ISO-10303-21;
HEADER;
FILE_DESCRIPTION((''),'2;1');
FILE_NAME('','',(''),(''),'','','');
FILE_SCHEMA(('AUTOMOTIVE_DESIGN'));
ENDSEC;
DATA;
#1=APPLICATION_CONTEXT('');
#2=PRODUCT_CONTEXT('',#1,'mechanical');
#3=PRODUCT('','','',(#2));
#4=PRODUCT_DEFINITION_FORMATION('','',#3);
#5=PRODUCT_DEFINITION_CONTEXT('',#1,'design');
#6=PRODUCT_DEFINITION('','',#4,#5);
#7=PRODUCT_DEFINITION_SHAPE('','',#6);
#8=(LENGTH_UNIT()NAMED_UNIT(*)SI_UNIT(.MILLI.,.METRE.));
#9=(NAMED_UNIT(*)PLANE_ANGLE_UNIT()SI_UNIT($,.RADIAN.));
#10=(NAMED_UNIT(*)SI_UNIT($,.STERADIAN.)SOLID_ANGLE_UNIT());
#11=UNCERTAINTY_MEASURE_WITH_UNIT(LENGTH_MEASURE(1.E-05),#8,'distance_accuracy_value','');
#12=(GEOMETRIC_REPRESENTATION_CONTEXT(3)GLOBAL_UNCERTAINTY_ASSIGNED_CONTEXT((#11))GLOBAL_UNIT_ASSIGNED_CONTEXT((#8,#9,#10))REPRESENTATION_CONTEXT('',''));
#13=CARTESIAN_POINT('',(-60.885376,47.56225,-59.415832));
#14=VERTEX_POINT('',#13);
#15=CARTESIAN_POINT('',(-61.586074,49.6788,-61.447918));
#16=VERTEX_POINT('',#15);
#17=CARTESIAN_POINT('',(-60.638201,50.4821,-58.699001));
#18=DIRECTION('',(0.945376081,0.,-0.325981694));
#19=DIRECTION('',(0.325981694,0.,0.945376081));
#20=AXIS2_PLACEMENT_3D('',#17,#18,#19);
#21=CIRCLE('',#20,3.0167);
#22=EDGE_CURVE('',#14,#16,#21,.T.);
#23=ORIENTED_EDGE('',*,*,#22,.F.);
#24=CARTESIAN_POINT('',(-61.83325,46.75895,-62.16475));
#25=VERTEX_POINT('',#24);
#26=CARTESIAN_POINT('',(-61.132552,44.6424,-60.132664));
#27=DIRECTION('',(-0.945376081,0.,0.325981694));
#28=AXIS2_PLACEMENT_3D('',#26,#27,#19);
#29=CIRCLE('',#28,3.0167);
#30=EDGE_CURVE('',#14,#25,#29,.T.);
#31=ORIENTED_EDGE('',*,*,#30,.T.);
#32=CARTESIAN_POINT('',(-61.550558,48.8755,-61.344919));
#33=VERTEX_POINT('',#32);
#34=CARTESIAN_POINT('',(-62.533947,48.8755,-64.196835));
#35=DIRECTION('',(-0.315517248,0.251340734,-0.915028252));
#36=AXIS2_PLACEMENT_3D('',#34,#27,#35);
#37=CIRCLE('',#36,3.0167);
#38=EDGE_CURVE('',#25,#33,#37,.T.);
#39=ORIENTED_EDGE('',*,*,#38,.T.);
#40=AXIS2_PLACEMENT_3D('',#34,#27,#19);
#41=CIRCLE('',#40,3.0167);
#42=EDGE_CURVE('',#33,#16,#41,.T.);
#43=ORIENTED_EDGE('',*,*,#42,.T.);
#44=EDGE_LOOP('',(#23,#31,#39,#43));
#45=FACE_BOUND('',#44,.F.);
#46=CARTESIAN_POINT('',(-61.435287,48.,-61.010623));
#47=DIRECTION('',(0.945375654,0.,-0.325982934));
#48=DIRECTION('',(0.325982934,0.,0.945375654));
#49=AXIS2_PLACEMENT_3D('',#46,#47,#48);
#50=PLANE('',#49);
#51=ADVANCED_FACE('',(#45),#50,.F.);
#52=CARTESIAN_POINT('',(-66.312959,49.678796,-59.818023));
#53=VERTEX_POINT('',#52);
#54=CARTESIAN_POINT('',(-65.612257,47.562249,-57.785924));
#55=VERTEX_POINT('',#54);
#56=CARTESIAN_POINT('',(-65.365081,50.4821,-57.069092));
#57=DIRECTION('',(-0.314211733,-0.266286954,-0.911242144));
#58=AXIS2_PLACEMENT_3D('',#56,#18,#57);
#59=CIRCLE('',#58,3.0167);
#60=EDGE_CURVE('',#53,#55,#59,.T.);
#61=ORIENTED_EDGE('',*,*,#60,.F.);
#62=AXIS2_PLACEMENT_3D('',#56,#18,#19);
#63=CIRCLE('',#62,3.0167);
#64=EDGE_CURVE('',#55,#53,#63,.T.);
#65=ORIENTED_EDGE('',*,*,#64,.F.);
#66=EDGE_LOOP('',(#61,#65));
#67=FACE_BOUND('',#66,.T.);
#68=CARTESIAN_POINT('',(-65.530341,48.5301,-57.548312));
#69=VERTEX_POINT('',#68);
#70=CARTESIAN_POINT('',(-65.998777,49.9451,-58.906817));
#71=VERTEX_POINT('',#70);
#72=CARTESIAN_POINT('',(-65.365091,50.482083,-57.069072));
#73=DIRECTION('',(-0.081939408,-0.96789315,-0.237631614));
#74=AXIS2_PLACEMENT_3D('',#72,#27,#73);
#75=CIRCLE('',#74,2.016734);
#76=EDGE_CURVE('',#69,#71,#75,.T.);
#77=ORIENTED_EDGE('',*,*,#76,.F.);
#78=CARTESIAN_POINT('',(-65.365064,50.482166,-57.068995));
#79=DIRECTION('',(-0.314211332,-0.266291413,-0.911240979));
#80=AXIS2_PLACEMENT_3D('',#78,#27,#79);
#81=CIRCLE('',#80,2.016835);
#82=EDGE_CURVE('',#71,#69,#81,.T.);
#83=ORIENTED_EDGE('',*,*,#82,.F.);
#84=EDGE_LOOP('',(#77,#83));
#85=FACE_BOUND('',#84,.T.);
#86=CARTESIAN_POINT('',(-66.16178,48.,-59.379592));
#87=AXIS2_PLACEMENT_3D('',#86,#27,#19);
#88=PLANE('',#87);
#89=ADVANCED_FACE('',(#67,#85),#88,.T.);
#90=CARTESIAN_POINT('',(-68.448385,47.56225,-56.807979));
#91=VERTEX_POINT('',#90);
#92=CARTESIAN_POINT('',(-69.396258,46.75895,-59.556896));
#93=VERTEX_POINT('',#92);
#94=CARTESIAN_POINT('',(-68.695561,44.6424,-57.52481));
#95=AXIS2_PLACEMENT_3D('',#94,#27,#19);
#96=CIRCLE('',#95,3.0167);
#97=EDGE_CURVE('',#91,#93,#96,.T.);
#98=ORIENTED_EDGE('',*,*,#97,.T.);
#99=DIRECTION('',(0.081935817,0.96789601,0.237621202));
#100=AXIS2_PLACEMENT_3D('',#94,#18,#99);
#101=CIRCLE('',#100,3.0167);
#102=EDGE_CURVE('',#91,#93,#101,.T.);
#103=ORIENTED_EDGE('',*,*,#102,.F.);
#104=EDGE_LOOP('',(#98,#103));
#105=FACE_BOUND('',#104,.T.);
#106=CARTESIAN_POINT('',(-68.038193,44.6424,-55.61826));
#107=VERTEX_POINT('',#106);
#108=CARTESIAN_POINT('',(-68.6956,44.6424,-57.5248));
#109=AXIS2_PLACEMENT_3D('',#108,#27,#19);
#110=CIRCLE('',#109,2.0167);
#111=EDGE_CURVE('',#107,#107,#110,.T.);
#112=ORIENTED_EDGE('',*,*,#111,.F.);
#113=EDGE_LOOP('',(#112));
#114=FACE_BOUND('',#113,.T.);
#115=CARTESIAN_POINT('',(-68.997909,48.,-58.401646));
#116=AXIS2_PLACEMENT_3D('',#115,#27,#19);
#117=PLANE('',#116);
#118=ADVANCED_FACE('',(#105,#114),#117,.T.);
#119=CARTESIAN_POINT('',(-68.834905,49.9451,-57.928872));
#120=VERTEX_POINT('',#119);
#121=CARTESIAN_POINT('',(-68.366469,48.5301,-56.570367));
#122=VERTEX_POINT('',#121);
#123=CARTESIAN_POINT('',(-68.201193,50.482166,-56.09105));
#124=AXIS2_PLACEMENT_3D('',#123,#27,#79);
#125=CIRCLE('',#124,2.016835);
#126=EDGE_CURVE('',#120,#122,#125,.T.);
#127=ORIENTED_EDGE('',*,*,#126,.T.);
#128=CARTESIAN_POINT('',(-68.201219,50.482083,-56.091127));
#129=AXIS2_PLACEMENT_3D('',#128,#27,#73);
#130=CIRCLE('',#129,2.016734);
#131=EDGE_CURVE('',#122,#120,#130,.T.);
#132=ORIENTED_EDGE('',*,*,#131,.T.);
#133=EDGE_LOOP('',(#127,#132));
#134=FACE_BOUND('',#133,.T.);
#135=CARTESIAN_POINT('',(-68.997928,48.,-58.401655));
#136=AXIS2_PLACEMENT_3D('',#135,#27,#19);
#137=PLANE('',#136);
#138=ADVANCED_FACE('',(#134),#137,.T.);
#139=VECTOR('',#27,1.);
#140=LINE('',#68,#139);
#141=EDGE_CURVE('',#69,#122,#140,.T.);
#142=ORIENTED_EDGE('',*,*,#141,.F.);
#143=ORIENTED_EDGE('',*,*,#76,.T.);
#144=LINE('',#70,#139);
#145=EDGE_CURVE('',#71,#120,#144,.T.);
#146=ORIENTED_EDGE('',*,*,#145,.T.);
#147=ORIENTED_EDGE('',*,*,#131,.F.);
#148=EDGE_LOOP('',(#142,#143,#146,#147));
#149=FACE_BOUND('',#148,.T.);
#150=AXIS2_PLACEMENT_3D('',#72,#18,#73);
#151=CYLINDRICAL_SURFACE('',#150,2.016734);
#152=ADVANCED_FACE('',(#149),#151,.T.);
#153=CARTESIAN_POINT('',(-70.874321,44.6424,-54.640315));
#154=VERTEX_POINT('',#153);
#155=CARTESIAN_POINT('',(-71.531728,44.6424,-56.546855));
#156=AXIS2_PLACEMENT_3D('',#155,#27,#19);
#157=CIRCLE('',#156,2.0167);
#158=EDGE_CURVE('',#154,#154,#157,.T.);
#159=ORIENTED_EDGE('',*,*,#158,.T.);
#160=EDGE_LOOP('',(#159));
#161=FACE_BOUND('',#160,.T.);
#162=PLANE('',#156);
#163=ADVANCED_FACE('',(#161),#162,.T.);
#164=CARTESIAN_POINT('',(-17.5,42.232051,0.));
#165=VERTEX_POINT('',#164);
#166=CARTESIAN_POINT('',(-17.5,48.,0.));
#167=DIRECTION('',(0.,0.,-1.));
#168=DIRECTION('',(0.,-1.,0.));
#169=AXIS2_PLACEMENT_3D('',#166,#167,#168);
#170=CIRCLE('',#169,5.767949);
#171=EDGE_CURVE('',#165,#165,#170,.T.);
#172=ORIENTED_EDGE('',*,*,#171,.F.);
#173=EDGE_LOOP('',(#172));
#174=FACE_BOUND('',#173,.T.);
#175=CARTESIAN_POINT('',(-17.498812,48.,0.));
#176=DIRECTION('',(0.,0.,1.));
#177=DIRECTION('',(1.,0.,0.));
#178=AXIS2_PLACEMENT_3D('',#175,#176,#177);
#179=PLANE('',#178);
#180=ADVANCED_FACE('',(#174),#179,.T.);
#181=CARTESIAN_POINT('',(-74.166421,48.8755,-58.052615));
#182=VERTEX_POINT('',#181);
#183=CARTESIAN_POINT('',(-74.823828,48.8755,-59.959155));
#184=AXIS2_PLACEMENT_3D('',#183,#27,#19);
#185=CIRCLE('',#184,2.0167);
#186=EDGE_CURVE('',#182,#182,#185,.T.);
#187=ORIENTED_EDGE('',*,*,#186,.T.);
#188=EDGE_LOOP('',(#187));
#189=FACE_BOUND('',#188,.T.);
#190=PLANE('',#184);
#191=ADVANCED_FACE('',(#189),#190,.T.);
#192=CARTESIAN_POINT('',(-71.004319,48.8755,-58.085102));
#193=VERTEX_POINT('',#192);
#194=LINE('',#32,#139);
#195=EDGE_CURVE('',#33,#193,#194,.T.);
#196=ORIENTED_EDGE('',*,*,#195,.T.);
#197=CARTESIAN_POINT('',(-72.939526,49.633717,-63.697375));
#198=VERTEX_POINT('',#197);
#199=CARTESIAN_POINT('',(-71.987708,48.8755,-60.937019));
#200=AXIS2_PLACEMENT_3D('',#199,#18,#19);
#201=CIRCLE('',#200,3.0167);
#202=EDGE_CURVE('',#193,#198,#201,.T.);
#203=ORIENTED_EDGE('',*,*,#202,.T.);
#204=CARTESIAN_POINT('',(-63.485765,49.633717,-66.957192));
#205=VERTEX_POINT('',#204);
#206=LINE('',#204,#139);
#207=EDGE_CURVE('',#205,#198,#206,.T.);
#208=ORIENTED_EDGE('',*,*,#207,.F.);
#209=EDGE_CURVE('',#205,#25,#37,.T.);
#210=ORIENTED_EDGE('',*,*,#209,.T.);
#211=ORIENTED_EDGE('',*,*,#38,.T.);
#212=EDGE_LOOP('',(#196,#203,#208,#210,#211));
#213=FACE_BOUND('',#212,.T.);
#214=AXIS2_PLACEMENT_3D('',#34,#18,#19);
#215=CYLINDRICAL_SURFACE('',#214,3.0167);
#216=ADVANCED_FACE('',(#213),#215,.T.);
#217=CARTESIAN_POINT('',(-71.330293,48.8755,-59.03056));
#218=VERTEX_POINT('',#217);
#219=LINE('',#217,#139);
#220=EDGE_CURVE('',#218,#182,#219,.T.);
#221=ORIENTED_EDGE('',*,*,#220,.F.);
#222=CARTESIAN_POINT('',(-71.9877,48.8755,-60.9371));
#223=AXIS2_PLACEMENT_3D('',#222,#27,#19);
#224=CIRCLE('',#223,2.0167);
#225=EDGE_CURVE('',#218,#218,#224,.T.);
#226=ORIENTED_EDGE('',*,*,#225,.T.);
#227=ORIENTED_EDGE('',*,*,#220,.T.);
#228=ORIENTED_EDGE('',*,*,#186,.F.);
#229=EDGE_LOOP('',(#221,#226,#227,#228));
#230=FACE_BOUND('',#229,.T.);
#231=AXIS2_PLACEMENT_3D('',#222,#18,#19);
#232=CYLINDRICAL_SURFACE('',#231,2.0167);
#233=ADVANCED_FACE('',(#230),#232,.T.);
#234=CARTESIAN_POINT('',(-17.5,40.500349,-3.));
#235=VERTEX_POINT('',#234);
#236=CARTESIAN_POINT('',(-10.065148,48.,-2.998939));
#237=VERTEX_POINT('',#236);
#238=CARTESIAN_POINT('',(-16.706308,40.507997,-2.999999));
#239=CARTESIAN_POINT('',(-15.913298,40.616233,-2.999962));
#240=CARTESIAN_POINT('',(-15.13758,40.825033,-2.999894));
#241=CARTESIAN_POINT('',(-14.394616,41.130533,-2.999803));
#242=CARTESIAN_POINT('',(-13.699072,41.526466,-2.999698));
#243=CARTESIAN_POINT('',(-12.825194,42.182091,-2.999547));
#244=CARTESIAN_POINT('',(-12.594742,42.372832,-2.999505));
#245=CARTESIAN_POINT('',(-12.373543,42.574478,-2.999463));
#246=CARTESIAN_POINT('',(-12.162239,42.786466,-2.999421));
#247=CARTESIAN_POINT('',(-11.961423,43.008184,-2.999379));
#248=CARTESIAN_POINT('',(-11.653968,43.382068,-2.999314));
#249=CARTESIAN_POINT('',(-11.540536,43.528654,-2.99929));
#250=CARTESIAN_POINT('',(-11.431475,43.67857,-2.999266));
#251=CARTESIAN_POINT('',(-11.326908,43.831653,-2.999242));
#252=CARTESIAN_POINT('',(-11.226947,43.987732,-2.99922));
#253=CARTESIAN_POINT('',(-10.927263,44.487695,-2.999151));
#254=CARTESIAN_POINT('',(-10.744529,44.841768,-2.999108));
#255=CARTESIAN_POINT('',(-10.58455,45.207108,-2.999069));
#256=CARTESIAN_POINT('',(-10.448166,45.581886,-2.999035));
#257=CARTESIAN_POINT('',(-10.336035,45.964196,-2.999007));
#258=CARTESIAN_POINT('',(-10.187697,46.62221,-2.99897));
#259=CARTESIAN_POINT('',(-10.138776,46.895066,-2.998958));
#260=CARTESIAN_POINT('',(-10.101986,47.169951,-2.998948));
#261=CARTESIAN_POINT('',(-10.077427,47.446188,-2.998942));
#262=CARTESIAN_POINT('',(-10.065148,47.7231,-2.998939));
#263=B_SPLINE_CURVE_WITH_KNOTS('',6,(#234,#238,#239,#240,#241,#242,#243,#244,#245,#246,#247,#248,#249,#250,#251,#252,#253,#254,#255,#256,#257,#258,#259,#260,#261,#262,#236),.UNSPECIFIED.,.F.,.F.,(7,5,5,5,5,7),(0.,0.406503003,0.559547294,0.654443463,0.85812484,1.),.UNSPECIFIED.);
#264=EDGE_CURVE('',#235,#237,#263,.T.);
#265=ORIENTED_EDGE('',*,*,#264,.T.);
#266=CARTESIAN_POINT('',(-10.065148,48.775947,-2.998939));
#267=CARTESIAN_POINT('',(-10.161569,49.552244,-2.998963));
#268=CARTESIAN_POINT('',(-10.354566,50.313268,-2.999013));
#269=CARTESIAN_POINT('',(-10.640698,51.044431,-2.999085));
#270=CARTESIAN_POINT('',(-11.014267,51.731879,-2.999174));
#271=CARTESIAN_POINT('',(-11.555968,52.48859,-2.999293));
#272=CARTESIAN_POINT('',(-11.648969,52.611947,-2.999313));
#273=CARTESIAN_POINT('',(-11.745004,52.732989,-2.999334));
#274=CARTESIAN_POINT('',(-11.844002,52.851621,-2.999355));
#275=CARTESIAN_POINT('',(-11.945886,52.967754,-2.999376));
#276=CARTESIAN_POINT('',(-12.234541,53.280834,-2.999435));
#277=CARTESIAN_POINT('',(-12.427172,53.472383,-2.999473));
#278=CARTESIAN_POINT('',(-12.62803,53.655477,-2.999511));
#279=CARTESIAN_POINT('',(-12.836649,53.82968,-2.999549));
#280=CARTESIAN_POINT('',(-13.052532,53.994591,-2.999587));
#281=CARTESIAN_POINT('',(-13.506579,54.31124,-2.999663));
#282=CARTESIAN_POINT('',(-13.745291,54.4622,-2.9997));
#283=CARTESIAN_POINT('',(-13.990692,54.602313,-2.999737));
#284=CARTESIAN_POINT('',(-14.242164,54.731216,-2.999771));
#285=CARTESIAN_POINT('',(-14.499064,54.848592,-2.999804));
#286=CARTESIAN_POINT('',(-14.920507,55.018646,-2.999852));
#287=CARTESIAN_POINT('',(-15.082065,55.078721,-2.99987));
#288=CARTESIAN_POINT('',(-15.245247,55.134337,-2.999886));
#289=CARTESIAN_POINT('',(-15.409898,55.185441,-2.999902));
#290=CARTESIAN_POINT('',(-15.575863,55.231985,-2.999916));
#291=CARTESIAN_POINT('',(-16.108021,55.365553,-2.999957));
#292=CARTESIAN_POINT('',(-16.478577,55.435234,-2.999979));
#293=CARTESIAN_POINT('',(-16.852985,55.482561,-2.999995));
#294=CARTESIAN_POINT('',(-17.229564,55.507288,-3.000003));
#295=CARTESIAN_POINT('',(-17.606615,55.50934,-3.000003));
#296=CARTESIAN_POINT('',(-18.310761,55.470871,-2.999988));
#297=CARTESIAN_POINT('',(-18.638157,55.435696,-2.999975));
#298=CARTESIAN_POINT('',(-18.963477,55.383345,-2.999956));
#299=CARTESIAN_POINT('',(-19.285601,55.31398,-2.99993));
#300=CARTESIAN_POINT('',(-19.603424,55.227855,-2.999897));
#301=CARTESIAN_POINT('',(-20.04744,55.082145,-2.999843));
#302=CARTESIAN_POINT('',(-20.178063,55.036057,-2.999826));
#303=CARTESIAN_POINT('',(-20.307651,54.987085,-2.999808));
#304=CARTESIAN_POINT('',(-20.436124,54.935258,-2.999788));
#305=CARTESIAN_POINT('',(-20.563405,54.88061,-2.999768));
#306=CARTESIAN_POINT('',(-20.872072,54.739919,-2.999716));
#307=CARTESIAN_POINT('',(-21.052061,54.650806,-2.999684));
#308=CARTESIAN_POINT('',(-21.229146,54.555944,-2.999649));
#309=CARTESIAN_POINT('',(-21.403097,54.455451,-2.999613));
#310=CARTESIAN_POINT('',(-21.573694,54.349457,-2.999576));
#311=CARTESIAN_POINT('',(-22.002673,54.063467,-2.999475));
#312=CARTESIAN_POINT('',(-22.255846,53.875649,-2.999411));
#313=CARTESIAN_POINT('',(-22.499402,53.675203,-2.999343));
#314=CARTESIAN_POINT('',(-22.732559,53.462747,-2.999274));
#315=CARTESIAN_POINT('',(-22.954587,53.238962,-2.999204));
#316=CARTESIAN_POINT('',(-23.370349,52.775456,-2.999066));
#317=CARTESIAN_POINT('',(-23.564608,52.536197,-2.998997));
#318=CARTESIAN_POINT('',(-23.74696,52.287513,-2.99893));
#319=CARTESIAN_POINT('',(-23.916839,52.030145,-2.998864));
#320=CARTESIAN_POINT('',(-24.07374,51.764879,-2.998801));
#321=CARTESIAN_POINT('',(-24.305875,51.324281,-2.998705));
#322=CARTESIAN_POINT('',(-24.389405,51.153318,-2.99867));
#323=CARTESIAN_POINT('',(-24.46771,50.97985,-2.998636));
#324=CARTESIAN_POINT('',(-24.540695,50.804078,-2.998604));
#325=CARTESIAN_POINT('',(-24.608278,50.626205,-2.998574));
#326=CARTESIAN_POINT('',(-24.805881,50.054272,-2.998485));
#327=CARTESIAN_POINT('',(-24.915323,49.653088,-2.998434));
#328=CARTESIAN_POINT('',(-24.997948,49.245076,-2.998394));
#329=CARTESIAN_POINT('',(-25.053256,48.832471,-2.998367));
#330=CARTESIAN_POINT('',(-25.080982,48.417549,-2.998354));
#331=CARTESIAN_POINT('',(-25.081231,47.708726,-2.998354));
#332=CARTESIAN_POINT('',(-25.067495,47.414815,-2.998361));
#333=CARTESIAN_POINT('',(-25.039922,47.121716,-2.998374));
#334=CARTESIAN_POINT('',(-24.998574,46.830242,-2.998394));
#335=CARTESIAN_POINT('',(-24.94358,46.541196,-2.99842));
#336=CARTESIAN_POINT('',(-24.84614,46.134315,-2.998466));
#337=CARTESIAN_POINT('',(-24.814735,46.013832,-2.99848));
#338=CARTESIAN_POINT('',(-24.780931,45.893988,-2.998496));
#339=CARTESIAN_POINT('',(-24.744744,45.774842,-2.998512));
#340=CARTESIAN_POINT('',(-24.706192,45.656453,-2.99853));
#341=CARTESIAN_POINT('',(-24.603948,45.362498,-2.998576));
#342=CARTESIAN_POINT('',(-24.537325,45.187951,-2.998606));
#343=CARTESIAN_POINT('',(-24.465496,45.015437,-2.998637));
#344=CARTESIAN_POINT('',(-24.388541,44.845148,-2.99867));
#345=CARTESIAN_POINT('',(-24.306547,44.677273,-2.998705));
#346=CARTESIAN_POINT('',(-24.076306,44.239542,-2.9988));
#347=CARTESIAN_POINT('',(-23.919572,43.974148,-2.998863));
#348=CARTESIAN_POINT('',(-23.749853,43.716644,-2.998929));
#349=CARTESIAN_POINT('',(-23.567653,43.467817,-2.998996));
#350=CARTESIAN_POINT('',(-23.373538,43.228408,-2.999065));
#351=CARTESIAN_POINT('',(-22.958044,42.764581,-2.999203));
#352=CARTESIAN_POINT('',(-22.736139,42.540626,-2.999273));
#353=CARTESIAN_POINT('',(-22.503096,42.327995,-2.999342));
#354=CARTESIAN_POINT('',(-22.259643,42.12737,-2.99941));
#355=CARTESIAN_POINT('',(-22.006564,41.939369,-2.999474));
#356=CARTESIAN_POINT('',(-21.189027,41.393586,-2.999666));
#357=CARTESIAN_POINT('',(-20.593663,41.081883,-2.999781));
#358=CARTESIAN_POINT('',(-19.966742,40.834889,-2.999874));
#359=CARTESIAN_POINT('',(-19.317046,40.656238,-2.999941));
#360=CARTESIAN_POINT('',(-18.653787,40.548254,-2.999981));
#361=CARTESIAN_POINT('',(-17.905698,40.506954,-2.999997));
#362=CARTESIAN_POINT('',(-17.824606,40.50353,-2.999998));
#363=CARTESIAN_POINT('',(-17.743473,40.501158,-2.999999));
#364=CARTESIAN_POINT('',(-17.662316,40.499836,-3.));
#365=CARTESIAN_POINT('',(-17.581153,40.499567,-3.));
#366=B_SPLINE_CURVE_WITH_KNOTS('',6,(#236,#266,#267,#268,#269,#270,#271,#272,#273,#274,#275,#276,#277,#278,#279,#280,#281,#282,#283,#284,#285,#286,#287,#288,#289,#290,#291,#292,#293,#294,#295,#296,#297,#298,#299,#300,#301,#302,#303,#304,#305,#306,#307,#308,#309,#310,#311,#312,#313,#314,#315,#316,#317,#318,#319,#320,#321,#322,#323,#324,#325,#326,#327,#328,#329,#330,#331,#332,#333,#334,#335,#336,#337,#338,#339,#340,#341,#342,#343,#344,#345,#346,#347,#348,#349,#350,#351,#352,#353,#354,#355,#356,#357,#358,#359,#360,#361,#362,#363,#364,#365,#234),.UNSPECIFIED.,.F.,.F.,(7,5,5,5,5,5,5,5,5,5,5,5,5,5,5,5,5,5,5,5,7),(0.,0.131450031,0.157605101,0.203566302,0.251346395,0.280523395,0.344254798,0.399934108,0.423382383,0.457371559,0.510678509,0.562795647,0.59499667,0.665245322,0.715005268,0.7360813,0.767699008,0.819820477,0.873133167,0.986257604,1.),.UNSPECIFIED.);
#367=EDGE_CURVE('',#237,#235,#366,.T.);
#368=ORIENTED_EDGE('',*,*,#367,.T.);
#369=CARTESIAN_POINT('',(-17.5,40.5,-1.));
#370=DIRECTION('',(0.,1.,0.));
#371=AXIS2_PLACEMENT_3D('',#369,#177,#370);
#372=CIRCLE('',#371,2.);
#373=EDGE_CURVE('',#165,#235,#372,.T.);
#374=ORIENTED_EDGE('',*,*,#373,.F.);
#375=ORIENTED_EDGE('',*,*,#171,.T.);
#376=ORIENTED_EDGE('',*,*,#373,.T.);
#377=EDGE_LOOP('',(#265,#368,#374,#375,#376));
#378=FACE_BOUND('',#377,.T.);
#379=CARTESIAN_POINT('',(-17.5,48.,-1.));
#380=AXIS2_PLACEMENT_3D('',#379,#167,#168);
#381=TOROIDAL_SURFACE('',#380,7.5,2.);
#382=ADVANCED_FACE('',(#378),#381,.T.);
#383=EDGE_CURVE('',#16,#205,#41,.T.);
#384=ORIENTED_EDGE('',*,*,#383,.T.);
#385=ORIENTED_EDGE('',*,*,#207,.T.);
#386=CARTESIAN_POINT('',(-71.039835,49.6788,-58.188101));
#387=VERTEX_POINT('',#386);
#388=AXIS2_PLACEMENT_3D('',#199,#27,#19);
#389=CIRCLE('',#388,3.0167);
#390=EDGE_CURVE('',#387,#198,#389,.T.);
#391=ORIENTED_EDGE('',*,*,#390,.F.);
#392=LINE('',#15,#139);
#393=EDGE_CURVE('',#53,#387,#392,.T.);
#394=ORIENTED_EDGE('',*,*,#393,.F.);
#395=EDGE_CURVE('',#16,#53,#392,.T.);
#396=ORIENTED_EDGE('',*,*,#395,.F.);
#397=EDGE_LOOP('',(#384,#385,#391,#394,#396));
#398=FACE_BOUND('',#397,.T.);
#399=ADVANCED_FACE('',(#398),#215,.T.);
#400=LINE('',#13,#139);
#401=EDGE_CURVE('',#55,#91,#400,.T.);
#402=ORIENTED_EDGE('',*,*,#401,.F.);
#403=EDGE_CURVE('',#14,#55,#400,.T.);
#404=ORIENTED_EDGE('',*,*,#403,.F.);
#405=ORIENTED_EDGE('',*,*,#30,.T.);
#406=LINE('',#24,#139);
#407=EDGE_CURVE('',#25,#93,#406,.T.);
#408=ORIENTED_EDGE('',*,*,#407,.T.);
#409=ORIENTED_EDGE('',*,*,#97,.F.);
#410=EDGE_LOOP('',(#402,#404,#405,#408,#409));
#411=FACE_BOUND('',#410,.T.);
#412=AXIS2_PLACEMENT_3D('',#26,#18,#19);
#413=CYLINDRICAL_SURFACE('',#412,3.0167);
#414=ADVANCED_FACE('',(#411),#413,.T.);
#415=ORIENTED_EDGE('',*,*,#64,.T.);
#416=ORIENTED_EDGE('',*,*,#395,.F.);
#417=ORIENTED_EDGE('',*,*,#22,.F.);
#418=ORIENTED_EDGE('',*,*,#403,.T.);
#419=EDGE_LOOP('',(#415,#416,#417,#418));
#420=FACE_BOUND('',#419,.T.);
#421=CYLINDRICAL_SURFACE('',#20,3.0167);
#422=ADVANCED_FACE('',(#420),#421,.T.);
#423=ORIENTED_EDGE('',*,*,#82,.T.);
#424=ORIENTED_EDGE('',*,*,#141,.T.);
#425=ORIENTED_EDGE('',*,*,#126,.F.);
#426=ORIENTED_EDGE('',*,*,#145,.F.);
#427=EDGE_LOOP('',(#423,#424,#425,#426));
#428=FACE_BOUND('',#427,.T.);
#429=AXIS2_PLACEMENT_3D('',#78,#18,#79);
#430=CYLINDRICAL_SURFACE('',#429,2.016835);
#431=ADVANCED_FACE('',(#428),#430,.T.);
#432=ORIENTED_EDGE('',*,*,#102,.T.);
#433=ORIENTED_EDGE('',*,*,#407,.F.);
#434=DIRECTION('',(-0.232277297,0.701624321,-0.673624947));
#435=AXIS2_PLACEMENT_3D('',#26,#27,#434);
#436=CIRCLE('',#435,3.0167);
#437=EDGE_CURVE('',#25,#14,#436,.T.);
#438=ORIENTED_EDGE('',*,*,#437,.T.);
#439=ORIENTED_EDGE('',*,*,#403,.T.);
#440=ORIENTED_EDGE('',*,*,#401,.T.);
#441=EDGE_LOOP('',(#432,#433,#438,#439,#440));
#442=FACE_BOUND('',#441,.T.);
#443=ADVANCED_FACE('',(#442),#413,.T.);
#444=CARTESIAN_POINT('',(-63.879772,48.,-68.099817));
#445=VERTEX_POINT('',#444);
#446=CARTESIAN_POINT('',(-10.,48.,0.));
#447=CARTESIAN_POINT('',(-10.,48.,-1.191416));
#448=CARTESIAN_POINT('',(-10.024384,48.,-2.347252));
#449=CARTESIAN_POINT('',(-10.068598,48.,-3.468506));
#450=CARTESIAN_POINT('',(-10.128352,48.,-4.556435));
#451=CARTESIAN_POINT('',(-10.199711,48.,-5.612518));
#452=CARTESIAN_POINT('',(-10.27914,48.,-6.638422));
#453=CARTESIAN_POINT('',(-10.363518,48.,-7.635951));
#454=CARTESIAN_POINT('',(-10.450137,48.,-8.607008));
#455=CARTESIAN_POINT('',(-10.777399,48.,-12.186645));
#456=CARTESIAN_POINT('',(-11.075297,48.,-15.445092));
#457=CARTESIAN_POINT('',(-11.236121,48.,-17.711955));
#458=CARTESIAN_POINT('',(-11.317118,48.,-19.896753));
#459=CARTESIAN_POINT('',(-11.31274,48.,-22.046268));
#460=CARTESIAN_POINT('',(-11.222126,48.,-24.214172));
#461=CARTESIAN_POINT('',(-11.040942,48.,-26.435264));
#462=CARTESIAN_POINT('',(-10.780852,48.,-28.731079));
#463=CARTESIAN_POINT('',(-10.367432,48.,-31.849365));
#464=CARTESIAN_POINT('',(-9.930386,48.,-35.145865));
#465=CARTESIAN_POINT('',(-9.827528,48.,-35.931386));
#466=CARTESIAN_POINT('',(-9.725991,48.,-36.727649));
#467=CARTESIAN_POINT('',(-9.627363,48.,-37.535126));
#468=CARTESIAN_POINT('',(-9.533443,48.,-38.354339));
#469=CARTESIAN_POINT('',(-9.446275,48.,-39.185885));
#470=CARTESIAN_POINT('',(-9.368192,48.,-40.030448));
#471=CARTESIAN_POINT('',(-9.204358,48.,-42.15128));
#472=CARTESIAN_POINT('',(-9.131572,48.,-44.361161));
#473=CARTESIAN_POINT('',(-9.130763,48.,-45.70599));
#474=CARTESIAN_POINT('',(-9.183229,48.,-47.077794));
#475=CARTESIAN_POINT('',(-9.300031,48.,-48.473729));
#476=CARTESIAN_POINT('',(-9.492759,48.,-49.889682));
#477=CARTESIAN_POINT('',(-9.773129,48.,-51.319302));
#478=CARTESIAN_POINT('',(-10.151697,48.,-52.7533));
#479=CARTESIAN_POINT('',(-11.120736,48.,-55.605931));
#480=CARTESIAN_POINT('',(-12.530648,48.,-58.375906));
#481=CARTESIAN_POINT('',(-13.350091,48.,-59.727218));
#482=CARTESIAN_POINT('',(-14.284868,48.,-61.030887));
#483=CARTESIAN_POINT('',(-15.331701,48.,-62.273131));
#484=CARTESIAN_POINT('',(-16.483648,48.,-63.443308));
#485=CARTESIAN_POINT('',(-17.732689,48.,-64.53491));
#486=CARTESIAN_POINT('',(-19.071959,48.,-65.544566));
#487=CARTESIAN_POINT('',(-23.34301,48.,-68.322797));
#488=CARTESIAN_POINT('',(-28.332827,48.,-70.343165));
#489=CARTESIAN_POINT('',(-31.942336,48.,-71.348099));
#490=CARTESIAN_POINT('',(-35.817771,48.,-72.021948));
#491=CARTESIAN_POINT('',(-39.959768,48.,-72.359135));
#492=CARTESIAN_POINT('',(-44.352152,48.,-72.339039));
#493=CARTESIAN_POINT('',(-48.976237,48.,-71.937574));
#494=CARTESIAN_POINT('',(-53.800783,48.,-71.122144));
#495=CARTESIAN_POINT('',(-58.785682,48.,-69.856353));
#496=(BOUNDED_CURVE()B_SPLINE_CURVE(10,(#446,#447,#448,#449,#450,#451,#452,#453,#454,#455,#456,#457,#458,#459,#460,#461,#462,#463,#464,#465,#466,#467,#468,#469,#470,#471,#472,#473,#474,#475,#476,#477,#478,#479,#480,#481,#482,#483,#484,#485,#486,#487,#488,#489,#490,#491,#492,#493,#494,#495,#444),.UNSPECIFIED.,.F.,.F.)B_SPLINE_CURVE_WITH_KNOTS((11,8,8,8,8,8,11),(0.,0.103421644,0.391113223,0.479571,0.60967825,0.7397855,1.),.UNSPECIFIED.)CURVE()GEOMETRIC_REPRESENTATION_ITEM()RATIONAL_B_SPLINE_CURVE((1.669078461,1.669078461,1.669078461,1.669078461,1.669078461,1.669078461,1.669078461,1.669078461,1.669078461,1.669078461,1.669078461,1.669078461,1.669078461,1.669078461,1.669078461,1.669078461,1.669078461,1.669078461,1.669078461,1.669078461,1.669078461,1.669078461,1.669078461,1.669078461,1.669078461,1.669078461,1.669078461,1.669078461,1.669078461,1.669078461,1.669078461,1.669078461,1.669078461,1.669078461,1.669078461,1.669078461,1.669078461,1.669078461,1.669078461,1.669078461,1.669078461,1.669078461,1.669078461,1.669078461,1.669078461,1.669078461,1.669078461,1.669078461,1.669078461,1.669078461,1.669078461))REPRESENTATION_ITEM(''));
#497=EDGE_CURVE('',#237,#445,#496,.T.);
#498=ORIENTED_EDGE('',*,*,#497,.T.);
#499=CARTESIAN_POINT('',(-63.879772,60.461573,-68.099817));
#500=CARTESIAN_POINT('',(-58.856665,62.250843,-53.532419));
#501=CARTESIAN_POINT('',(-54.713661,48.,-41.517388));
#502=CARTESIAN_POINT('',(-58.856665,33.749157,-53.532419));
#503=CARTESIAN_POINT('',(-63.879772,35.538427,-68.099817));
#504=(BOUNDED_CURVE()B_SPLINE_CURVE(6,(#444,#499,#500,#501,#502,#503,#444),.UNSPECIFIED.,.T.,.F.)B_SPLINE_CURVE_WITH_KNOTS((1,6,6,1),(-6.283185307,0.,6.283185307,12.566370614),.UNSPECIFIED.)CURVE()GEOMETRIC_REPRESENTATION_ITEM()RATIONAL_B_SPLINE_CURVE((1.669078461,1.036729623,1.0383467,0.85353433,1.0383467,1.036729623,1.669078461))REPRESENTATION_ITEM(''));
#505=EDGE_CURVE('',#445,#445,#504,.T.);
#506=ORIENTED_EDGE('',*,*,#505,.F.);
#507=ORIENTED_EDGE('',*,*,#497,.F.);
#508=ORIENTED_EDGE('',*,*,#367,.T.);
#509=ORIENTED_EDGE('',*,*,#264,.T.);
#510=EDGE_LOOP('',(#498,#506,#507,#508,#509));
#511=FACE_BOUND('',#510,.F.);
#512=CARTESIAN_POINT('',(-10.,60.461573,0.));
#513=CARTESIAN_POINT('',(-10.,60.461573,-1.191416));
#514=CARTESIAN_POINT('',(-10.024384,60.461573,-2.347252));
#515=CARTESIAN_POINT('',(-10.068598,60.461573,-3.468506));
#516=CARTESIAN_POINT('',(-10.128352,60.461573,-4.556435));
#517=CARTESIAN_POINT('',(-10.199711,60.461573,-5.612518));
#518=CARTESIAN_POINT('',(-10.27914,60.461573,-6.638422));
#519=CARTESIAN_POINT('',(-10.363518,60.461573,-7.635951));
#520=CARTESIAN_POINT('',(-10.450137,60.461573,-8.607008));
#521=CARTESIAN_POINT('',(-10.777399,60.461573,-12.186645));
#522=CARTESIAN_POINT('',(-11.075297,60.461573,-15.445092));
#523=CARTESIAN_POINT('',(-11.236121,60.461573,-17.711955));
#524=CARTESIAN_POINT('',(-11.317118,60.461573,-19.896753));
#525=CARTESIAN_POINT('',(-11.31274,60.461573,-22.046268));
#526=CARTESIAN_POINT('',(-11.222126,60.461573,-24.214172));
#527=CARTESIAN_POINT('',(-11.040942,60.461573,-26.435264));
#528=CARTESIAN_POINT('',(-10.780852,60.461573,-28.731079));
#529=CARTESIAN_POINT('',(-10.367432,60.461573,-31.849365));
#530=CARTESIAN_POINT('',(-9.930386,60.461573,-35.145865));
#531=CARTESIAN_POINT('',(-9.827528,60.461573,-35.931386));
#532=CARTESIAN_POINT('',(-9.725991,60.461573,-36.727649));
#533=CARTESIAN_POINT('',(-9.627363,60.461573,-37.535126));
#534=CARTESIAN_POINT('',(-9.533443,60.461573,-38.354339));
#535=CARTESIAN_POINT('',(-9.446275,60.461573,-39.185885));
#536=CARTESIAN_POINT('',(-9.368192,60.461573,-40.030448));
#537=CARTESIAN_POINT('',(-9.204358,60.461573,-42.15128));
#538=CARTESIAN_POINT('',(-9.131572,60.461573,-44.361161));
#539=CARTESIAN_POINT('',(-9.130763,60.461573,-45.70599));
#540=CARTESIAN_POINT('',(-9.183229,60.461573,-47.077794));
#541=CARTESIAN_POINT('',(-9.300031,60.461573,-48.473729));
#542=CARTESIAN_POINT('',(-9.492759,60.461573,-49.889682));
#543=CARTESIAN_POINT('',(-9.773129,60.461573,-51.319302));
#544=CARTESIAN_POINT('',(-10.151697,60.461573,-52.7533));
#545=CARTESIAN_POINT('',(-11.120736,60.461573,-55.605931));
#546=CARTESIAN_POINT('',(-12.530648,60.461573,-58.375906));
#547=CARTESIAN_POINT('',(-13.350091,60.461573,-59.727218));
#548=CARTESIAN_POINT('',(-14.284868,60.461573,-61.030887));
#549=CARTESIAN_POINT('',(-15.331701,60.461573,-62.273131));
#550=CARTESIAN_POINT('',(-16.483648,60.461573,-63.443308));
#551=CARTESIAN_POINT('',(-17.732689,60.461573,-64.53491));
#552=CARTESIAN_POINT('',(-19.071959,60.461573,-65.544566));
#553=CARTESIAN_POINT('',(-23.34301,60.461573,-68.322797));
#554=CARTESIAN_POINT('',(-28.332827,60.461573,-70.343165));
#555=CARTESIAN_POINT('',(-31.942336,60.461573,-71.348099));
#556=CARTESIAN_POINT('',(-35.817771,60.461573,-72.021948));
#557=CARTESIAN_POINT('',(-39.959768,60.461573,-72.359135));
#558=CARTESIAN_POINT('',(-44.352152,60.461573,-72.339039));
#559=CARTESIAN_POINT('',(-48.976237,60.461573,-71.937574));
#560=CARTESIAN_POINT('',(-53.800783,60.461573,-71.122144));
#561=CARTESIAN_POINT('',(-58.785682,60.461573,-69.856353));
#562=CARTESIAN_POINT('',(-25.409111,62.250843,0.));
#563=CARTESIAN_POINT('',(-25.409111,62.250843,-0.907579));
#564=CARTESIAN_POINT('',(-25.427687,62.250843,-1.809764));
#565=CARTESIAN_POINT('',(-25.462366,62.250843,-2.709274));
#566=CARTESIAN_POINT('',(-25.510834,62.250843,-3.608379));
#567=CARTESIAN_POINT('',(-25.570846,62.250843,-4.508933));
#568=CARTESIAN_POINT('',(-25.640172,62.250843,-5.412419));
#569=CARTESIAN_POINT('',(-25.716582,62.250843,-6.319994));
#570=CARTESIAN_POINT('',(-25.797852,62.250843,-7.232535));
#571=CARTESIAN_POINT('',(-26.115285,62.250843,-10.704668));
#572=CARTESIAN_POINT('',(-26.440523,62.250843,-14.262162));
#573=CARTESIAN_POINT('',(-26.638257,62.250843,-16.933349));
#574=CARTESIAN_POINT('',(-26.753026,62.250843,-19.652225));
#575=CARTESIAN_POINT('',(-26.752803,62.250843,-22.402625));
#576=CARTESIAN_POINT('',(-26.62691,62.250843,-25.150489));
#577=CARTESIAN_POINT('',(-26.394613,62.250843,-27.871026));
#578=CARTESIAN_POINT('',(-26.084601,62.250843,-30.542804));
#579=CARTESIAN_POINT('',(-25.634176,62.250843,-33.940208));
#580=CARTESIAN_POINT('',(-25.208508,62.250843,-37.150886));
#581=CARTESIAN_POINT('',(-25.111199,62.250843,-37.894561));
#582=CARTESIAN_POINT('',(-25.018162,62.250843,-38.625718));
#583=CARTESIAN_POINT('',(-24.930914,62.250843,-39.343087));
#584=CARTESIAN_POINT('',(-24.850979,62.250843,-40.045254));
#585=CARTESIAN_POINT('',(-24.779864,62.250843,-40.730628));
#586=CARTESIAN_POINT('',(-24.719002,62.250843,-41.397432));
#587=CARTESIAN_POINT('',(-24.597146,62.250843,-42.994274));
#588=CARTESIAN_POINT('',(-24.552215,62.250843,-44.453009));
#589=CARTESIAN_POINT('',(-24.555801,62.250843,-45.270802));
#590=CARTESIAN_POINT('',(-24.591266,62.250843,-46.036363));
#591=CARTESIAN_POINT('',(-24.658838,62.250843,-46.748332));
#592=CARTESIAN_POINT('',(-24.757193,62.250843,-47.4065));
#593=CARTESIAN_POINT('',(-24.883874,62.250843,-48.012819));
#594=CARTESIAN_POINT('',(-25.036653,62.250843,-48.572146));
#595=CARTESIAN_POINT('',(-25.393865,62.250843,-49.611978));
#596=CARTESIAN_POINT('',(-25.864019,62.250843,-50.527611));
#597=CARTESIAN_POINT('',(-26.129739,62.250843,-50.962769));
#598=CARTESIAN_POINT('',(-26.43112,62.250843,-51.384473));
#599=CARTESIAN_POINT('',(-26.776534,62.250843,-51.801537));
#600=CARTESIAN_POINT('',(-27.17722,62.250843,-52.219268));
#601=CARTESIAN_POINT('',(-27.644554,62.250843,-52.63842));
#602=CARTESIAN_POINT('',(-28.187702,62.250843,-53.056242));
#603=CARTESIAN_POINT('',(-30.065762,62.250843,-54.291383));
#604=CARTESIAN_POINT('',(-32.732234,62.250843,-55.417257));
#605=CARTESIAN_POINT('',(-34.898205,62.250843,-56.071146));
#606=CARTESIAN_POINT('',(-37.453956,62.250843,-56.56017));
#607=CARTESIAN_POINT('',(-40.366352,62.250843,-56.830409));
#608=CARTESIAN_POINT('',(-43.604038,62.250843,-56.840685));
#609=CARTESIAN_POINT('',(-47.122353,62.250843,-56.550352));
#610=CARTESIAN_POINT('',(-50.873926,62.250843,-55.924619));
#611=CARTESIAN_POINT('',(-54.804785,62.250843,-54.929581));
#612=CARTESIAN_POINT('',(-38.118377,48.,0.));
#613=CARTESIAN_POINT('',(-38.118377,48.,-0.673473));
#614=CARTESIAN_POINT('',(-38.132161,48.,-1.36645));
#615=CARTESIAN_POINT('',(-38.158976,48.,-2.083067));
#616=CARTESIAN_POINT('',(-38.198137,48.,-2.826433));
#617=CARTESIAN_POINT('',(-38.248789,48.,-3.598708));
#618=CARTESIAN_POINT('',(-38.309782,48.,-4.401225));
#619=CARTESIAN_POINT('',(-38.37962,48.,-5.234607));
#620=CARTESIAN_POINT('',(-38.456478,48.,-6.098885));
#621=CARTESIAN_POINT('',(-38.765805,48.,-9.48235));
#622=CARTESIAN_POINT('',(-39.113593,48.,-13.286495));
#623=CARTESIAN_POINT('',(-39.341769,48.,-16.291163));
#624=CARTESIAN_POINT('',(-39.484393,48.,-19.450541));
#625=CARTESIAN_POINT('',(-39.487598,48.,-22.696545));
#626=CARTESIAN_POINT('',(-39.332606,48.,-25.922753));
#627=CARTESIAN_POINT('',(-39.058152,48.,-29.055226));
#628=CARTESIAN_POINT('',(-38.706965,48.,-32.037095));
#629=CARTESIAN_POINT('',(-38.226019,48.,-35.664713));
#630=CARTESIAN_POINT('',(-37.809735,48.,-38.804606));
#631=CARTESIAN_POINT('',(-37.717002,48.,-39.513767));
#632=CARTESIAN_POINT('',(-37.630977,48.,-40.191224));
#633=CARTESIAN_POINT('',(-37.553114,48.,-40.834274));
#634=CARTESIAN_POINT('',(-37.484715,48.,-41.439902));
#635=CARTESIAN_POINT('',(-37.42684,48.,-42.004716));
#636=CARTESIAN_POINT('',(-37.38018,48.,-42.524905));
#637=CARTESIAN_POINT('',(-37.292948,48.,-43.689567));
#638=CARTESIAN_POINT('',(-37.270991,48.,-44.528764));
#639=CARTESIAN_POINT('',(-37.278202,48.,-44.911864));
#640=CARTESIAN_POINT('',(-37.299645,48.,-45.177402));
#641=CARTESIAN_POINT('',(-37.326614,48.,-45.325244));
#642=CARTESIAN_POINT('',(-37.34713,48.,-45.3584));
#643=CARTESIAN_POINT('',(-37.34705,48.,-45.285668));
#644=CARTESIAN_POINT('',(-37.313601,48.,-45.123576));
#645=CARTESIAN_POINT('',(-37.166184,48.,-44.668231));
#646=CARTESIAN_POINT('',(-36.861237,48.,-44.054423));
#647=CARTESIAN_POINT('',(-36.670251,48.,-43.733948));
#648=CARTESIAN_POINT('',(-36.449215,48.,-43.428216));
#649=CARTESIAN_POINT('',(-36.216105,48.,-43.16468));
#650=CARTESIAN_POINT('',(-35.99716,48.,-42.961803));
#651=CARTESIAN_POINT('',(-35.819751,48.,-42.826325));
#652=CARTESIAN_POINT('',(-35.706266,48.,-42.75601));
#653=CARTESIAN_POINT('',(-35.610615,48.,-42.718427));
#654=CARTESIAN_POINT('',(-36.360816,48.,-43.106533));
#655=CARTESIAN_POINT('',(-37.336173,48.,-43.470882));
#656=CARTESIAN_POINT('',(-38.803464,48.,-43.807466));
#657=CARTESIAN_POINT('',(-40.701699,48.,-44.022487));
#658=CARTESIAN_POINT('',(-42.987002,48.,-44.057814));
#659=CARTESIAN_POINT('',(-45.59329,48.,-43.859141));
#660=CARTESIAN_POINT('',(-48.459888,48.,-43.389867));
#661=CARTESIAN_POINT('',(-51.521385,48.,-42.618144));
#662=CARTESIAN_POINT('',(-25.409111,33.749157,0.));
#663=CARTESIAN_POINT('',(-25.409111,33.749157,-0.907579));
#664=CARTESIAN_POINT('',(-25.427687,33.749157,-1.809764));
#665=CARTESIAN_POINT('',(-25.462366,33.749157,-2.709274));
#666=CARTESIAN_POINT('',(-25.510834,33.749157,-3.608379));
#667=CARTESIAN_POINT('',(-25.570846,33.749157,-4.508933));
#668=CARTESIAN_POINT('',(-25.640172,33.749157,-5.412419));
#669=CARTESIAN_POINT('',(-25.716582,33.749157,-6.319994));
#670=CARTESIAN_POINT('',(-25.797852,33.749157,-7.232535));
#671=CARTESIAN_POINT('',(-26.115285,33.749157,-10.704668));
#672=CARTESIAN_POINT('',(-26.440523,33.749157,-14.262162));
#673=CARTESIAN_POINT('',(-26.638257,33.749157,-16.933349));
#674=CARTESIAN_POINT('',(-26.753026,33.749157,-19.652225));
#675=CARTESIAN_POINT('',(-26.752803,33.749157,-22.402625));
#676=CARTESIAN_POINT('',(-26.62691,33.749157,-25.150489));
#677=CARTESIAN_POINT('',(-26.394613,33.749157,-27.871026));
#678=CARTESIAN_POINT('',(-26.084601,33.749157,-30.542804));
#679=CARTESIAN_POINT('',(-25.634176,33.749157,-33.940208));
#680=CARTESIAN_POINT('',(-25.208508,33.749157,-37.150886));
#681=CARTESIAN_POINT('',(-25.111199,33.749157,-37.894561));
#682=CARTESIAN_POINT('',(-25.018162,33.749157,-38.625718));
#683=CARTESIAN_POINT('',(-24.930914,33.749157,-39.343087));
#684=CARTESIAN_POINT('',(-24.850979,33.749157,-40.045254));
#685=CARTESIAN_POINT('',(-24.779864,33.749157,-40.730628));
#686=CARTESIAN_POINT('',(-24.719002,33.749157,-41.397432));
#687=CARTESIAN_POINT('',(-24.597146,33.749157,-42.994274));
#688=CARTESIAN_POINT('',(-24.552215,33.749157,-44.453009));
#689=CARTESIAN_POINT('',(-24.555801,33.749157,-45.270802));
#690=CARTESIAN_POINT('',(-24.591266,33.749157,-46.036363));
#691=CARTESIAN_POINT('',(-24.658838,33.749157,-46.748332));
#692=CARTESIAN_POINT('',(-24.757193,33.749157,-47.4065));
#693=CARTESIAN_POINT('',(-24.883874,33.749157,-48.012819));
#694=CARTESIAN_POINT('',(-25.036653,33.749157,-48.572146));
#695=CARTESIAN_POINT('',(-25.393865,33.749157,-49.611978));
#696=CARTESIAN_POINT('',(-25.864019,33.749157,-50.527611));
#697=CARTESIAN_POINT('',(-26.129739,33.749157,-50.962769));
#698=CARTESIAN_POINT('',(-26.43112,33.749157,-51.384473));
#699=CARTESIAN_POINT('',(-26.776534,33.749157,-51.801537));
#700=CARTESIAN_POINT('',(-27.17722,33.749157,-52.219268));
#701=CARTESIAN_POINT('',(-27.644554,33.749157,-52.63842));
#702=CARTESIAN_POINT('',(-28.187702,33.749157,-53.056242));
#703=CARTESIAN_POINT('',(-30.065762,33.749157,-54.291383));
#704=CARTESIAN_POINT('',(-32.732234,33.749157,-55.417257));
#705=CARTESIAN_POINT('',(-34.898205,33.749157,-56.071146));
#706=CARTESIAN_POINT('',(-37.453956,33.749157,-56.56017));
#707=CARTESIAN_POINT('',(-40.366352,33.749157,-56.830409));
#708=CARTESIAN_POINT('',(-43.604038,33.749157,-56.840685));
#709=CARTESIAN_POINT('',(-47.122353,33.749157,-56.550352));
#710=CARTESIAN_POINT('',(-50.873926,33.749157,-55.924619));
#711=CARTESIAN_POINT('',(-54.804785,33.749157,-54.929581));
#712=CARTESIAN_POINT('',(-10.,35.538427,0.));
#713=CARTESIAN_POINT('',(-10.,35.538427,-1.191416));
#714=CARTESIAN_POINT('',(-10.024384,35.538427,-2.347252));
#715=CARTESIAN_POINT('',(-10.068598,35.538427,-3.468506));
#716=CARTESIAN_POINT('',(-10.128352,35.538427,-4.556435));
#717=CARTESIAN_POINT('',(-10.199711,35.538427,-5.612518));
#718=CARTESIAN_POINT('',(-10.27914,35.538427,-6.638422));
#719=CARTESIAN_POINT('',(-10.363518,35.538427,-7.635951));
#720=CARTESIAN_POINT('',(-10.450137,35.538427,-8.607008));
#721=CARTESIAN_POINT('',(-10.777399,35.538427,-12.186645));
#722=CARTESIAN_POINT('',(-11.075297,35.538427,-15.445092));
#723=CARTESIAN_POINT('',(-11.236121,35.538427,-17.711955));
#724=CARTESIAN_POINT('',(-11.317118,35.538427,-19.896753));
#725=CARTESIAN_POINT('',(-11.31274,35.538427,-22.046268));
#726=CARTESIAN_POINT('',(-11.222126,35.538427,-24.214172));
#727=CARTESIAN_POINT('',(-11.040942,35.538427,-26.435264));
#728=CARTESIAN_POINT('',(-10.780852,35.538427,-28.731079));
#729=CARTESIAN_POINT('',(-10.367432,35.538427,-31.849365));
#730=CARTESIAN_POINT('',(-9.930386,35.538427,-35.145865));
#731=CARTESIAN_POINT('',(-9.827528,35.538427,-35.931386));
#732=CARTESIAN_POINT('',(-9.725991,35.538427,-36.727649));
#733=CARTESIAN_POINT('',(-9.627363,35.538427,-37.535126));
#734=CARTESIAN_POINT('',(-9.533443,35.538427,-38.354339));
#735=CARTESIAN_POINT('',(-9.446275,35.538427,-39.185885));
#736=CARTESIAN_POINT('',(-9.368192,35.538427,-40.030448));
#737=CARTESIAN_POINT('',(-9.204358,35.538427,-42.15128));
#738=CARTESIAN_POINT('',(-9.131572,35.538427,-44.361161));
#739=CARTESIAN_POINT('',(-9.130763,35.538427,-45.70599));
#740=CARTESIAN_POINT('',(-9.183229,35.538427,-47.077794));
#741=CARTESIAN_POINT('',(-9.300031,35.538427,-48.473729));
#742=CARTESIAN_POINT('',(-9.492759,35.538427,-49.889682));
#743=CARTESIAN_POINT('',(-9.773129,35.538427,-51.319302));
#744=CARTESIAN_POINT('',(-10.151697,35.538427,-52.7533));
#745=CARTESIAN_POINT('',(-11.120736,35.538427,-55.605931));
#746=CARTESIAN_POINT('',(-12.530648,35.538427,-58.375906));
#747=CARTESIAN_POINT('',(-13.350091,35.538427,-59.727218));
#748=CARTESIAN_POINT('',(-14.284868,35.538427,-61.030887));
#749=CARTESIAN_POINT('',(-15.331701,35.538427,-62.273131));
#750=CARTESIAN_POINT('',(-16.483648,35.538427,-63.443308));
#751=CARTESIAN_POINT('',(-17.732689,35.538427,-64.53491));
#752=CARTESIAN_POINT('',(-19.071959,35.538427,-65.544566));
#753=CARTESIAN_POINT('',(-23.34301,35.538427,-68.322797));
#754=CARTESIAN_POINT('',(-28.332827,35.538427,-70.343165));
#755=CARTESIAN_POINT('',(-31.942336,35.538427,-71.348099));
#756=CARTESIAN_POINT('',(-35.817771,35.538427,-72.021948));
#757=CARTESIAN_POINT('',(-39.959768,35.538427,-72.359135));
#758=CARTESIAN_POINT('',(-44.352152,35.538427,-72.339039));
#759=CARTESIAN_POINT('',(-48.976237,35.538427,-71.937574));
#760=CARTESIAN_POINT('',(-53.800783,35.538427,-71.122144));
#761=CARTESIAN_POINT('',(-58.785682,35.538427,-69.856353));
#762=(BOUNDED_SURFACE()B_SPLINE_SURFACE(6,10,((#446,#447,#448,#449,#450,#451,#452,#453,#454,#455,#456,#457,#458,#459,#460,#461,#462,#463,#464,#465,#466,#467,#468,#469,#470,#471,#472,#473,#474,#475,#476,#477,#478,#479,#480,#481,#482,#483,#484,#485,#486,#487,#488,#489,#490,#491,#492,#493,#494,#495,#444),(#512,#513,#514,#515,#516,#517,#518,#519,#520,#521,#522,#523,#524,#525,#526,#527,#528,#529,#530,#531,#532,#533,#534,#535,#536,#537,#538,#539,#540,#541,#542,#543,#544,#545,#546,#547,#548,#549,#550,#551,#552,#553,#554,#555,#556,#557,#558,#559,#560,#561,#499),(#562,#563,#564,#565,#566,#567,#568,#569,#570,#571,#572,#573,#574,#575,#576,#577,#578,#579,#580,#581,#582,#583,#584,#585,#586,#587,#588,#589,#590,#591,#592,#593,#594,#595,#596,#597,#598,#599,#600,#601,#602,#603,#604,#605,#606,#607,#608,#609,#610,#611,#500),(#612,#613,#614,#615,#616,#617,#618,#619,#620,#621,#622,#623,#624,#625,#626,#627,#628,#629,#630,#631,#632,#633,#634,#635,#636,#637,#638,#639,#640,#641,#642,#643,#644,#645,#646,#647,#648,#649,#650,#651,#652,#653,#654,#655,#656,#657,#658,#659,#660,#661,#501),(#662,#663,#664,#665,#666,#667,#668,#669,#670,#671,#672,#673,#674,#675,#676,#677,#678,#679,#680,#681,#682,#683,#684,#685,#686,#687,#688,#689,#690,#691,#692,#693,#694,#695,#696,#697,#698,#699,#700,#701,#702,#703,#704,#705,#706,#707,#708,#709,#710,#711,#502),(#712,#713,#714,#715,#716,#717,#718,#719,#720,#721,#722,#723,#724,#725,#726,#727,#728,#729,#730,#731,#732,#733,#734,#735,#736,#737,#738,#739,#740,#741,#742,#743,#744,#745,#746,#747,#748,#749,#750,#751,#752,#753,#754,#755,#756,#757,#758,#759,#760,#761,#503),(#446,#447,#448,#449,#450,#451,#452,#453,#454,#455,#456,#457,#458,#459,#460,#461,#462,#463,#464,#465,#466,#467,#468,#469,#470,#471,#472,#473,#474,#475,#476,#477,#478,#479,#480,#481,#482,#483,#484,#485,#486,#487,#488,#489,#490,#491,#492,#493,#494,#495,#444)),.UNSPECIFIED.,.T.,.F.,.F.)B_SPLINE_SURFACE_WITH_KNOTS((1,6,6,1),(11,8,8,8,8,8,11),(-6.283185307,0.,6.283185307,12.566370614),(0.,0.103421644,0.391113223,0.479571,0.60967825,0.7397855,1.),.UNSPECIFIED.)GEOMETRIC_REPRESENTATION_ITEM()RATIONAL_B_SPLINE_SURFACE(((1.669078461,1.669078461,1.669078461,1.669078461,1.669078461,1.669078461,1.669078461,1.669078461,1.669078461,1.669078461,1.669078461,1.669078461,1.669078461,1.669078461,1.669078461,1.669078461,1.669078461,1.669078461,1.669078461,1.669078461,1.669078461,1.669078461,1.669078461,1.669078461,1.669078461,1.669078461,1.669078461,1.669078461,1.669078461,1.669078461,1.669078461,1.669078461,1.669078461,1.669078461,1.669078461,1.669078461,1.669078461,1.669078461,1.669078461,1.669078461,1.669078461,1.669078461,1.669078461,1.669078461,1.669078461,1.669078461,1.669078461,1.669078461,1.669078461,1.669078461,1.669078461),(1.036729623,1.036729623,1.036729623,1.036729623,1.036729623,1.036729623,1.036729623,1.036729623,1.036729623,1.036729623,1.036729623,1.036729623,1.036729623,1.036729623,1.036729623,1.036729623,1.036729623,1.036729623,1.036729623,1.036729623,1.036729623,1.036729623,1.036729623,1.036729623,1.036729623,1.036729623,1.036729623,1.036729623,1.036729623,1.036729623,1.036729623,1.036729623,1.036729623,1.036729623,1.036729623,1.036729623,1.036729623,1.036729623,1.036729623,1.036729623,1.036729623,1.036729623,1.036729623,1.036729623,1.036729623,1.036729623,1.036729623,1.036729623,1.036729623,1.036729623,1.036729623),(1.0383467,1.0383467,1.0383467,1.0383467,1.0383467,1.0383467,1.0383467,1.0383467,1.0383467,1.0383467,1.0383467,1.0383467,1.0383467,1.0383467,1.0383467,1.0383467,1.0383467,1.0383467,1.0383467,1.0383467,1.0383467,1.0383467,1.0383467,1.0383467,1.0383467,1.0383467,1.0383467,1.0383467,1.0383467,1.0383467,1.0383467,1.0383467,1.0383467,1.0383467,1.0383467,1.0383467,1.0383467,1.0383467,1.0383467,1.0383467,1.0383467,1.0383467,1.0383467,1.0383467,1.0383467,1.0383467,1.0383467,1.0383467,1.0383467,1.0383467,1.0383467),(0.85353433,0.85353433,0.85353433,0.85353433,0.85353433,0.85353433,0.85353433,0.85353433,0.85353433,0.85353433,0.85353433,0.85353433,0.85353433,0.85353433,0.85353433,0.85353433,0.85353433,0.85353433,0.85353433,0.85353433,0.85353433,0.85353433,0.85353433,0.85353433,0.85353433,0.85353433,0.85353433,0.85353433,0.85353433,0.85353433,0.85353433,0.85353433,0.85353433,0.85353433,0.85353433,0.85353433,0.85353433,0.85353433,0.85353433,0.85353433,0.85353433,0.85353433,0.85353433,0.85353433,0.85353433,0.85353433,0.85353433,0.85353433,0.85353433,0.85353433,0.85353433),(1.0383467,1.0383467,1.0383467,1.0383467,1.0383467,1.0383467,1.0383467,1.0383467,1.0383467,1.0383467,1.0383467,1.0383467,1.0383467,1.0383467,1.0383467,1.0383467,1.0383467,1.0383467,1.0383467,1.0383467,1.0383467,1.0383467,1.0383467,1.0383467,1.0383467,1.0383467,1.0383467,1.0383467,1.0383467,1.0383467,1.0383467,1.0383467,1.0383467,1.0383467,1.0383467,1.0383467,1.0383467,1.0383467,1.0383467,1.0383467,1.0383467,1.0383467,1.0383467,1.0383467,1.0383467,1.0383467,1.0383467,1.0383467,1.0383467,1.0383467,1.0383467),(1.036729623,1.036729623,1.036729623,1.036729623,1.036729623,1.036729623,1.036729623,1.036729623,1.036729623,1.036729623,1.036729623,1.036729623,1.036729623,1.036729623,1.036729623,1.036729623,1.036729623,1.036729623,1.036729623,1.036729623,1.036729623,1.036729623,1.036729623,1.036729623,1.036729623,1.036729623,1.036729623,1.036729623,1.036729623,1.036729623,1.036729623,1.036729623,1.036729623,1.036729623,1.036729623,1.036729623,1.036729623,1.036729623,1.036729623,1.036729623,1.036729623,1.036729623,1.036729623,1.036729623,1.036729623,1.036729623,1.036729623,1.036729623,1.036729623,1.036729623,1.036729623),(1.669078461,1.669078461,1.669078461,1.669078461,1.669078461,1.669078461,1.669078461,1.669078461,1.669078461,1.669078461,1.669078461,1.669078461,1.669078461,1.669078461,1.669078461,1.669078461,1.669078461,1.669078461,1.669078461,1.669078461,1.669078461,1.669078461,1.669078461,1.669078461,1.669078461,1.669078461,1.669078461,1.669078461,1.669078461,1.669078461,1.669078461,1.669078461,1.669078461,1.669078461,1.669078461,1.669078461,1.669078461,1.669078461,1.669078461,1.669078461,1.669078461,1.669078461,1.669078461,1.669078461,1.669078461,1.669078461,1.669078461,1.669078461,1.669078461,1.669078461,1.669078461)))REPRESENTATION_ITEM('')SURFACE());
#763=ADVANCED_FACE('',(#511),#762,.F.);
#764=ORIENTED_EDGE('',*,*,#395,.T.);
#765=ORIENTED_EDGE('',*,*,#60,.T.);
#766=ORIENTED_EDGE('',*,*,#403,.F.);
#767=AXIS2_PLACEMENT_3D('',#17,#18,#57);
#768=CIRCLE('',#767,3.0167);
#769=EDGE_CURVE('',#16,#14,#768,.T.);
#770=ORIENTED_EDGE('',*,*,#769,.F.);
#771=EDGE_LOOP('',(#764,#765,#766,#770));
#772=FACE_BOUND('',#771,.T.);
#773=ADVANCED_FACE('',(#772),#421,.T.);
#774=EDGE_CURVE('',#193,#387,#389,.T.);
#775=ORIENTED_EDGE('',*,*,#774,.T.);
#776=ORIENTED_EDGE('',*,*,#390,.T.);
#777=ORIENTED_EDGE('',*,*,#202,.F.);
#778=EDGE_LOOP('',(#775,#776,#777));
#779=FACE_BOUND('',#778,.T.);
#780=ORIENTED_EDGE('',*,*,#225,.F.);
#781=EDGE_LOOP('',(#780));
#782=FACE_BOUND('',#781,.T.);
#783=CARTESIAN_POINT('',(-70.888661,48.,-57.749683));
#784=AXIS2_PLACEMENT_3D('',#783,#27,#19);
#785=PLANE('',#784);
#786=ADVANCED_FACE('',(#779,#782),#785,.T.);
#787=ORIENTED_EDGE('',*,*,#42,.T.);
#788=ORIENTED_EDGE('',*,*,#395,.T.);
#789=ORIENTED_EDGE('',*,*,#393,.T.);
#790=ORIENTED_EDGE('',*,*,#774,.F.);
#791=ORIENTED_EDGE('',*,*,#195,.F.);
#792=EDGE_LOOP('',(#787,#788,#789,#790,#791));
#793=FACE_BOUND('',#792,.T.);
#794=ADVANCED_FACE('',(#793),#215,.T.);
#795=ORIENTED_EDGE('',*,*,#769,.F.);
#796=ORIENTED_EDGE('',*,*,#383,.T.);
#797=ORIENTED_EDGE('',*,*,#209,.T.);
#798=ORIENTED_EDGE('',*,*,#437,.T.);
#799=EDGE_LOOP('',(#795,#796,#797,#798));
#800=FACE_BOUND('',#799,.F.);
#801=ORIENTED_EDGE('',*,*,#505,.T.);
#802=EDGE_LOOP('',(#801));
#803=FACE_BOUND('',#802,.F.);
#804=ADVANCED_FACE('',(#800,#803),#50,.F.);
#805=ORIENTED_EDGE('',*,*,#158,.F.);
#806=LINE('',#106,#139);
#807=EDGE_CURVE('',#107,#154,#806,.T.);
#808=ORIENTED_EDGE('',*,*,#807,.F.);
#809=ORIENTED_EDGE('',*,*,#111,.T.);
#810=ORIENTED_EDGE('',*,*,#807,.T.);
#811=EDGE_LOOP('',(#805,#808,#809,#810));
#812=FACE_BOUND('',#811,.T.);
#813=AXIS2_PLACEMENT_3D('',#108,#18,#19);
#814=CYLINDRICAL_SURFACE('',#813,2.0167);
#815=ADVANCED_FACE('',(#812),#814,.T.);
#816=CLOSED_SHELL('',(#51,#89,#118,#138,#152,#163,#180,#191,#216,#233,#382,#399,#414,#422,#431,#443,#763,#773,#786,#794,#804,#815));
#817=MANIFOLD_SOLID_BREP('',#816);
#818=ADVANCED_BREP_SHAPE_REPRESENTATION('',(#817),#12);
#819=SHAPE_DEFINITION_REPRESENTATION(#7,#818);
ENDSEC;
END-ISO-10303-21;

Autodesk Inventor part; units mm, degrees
ref_plane "XY Plane" through (0, 0, 0) normal (0, 0, 1) x (1, 0, 0)
sketch "Sketch1" plane through (0, 0, 0) normal (0, 0, 1) x (1, 0, 0)
  circle A0 centre (-17.5, 48) radius 7.5 projected
  point P0 (0, 0)
ref_plane "Work Plane1" through (-17.5, 48, 0) normal (1, 0, 0) x (0, 1, 0)
ref_plane "Work Plane2" through (-17.5, 48, 0) normal (0, 1, 0) x (-1, 0, 0)
sketch "Sketch2" plane through (-17.5, 48, 0) normal (0, 1, 0) x (-1, 0, 0)
  spline S0 degree 4 poles (0, 0) (0, -12.2101) (7.249, -30.6467) (-16.4407, -58.3105) (21.0008, -68.9176) (43.9349, -61.0095) knots 0 0 0 0 0 0.479571 1 1 1 1 1
  line L0 (0, 9.4013) -> (0, -9.4013) construction
  arc A0 (0.4883, 7.4568) -> (0.4883, -7.4568) centre (57.1813, 0) ccw construction
  line L1 (-7.5, 0) -> (7.5, 0) construction
  line L2 (31.8572, -65.1742) -> (56.0127, -56.8449) construction
  arc A1 (34.1338, -63.5881) -> (53.2424, -56.9991) centre (21.828, 3.1026) ccw construction
  point P0 (-48, 0)
  point P1 (0.8767, -27.7866)
  point P2 (0.5269, -52.3931)
sweep "Sweep1" add profiles "Sketch1" path "Sketch2"
sketch "Sketch3" plane through (-61.4349, 48, -61.0095) normal (-0.9453761, 0, 0.3259817) x (0.3259817, 0, 0.9453761)
  circle A0 centre (0, 0) radius 7.5 projected
  circle A1 centre (0, 0) radius 6.5
  circle A2 centre (2.444, 2.4821) radius 3.0167
  circle A3 centre (-3.3715, 0.8755) radius 3.0167
  circle A4 centre (0.9275, -3.3576) radius 3.0167
  point P0 (-7.5, 0)
  point P1 (77.7036, -48)
  dimension "d1" = 1
extrude "Extrusion1" add sketch "Sketch3" along normal blind 5 contours A2
extrude "Extrusion2" add sketch "Sketch3" along normal blind 10 contours A3
extrude "Extrusion3" add sketch "Sketch3" along normal blind 8 contours A4
sketch "Sketch4" plane through (-71.9877, 48.8755, -60.9371) normal (-0.9453761, 0, 0.3259817) x (0.3259817, 0, 0.9453761)
  circle A0 centre (0, 0) radius 3.0167 projected
  circle A1 centre (0, 0) radius 2.0167
  point P0 (81.0751, -48.8755)
  dimension "d8" = 1
sketch "Sketch5" plane through (-66.1618, 48, -59.3796) normal (-0.9453761, 0, 0.3259817) x (0.3259817, 0, 0.9453761)
  arc A0 (1.6858, -0.4378) -> (-0.4638, 1.6788) centre (2.444, 2.4821) ccw projected
  arc A1 (-0.4638, 1.6788) -> (1.6858, -0.4378) centre (2.444, 2.4821) ccw projected
  arc A2 (1.9371, 0.5301) -> (0.5001, 1.9451) centre (2.444, 2.4821) ccw
  arc A3 (0.5001, 1.9451) -> (1.9371, 0.5301) centre (2.444, 2.4821) ccw
  point P0 (77.7036, -48)
  dimension "d9" = 1
sketch "Sketch6" plane through (-68.6956, 44.6424, -57.5248) normal (-0.9453761, 0, 0.3259817) x (0.3259817, 0, 0.9453761)
  circle A0 centre (0, 0) radius 3.0167 projected
  circle A1 centre (0, 0) radius 2.0167
  point P0 (-2.1495, 2.1165)
  point P1 (76.7761, -44.6424)
  dimension "d10" = 1
extrude "Extrusion4" add sketch "Sketch4" along normal blind 3 contours A1
extrude "Extrusion5" add sketch "Sketch6" along normal blind 3 contours A1
extrude "Extrusion6" add sketch "Sketch5" along normal blind 3 contours A3 A2
sketch "Sketch7" plane through (-17.5, 48, 0) normal (1, 0, 0) x (0, 1, 0)
  line L0 (7.5, -1) -> (-7.5, -1) projected
  circle A0 centre (-7.5, -1) radius 2
  line L1 (0, -1.369) -> (0, -7.6638)
  point P0 (-48, 0)
  dimension "d17" = 4
revolve "Revolution1" add sketch "Sketch7" angle 360 about axis through (-17.5, 48, -1.369) along (0, 0, -1)
